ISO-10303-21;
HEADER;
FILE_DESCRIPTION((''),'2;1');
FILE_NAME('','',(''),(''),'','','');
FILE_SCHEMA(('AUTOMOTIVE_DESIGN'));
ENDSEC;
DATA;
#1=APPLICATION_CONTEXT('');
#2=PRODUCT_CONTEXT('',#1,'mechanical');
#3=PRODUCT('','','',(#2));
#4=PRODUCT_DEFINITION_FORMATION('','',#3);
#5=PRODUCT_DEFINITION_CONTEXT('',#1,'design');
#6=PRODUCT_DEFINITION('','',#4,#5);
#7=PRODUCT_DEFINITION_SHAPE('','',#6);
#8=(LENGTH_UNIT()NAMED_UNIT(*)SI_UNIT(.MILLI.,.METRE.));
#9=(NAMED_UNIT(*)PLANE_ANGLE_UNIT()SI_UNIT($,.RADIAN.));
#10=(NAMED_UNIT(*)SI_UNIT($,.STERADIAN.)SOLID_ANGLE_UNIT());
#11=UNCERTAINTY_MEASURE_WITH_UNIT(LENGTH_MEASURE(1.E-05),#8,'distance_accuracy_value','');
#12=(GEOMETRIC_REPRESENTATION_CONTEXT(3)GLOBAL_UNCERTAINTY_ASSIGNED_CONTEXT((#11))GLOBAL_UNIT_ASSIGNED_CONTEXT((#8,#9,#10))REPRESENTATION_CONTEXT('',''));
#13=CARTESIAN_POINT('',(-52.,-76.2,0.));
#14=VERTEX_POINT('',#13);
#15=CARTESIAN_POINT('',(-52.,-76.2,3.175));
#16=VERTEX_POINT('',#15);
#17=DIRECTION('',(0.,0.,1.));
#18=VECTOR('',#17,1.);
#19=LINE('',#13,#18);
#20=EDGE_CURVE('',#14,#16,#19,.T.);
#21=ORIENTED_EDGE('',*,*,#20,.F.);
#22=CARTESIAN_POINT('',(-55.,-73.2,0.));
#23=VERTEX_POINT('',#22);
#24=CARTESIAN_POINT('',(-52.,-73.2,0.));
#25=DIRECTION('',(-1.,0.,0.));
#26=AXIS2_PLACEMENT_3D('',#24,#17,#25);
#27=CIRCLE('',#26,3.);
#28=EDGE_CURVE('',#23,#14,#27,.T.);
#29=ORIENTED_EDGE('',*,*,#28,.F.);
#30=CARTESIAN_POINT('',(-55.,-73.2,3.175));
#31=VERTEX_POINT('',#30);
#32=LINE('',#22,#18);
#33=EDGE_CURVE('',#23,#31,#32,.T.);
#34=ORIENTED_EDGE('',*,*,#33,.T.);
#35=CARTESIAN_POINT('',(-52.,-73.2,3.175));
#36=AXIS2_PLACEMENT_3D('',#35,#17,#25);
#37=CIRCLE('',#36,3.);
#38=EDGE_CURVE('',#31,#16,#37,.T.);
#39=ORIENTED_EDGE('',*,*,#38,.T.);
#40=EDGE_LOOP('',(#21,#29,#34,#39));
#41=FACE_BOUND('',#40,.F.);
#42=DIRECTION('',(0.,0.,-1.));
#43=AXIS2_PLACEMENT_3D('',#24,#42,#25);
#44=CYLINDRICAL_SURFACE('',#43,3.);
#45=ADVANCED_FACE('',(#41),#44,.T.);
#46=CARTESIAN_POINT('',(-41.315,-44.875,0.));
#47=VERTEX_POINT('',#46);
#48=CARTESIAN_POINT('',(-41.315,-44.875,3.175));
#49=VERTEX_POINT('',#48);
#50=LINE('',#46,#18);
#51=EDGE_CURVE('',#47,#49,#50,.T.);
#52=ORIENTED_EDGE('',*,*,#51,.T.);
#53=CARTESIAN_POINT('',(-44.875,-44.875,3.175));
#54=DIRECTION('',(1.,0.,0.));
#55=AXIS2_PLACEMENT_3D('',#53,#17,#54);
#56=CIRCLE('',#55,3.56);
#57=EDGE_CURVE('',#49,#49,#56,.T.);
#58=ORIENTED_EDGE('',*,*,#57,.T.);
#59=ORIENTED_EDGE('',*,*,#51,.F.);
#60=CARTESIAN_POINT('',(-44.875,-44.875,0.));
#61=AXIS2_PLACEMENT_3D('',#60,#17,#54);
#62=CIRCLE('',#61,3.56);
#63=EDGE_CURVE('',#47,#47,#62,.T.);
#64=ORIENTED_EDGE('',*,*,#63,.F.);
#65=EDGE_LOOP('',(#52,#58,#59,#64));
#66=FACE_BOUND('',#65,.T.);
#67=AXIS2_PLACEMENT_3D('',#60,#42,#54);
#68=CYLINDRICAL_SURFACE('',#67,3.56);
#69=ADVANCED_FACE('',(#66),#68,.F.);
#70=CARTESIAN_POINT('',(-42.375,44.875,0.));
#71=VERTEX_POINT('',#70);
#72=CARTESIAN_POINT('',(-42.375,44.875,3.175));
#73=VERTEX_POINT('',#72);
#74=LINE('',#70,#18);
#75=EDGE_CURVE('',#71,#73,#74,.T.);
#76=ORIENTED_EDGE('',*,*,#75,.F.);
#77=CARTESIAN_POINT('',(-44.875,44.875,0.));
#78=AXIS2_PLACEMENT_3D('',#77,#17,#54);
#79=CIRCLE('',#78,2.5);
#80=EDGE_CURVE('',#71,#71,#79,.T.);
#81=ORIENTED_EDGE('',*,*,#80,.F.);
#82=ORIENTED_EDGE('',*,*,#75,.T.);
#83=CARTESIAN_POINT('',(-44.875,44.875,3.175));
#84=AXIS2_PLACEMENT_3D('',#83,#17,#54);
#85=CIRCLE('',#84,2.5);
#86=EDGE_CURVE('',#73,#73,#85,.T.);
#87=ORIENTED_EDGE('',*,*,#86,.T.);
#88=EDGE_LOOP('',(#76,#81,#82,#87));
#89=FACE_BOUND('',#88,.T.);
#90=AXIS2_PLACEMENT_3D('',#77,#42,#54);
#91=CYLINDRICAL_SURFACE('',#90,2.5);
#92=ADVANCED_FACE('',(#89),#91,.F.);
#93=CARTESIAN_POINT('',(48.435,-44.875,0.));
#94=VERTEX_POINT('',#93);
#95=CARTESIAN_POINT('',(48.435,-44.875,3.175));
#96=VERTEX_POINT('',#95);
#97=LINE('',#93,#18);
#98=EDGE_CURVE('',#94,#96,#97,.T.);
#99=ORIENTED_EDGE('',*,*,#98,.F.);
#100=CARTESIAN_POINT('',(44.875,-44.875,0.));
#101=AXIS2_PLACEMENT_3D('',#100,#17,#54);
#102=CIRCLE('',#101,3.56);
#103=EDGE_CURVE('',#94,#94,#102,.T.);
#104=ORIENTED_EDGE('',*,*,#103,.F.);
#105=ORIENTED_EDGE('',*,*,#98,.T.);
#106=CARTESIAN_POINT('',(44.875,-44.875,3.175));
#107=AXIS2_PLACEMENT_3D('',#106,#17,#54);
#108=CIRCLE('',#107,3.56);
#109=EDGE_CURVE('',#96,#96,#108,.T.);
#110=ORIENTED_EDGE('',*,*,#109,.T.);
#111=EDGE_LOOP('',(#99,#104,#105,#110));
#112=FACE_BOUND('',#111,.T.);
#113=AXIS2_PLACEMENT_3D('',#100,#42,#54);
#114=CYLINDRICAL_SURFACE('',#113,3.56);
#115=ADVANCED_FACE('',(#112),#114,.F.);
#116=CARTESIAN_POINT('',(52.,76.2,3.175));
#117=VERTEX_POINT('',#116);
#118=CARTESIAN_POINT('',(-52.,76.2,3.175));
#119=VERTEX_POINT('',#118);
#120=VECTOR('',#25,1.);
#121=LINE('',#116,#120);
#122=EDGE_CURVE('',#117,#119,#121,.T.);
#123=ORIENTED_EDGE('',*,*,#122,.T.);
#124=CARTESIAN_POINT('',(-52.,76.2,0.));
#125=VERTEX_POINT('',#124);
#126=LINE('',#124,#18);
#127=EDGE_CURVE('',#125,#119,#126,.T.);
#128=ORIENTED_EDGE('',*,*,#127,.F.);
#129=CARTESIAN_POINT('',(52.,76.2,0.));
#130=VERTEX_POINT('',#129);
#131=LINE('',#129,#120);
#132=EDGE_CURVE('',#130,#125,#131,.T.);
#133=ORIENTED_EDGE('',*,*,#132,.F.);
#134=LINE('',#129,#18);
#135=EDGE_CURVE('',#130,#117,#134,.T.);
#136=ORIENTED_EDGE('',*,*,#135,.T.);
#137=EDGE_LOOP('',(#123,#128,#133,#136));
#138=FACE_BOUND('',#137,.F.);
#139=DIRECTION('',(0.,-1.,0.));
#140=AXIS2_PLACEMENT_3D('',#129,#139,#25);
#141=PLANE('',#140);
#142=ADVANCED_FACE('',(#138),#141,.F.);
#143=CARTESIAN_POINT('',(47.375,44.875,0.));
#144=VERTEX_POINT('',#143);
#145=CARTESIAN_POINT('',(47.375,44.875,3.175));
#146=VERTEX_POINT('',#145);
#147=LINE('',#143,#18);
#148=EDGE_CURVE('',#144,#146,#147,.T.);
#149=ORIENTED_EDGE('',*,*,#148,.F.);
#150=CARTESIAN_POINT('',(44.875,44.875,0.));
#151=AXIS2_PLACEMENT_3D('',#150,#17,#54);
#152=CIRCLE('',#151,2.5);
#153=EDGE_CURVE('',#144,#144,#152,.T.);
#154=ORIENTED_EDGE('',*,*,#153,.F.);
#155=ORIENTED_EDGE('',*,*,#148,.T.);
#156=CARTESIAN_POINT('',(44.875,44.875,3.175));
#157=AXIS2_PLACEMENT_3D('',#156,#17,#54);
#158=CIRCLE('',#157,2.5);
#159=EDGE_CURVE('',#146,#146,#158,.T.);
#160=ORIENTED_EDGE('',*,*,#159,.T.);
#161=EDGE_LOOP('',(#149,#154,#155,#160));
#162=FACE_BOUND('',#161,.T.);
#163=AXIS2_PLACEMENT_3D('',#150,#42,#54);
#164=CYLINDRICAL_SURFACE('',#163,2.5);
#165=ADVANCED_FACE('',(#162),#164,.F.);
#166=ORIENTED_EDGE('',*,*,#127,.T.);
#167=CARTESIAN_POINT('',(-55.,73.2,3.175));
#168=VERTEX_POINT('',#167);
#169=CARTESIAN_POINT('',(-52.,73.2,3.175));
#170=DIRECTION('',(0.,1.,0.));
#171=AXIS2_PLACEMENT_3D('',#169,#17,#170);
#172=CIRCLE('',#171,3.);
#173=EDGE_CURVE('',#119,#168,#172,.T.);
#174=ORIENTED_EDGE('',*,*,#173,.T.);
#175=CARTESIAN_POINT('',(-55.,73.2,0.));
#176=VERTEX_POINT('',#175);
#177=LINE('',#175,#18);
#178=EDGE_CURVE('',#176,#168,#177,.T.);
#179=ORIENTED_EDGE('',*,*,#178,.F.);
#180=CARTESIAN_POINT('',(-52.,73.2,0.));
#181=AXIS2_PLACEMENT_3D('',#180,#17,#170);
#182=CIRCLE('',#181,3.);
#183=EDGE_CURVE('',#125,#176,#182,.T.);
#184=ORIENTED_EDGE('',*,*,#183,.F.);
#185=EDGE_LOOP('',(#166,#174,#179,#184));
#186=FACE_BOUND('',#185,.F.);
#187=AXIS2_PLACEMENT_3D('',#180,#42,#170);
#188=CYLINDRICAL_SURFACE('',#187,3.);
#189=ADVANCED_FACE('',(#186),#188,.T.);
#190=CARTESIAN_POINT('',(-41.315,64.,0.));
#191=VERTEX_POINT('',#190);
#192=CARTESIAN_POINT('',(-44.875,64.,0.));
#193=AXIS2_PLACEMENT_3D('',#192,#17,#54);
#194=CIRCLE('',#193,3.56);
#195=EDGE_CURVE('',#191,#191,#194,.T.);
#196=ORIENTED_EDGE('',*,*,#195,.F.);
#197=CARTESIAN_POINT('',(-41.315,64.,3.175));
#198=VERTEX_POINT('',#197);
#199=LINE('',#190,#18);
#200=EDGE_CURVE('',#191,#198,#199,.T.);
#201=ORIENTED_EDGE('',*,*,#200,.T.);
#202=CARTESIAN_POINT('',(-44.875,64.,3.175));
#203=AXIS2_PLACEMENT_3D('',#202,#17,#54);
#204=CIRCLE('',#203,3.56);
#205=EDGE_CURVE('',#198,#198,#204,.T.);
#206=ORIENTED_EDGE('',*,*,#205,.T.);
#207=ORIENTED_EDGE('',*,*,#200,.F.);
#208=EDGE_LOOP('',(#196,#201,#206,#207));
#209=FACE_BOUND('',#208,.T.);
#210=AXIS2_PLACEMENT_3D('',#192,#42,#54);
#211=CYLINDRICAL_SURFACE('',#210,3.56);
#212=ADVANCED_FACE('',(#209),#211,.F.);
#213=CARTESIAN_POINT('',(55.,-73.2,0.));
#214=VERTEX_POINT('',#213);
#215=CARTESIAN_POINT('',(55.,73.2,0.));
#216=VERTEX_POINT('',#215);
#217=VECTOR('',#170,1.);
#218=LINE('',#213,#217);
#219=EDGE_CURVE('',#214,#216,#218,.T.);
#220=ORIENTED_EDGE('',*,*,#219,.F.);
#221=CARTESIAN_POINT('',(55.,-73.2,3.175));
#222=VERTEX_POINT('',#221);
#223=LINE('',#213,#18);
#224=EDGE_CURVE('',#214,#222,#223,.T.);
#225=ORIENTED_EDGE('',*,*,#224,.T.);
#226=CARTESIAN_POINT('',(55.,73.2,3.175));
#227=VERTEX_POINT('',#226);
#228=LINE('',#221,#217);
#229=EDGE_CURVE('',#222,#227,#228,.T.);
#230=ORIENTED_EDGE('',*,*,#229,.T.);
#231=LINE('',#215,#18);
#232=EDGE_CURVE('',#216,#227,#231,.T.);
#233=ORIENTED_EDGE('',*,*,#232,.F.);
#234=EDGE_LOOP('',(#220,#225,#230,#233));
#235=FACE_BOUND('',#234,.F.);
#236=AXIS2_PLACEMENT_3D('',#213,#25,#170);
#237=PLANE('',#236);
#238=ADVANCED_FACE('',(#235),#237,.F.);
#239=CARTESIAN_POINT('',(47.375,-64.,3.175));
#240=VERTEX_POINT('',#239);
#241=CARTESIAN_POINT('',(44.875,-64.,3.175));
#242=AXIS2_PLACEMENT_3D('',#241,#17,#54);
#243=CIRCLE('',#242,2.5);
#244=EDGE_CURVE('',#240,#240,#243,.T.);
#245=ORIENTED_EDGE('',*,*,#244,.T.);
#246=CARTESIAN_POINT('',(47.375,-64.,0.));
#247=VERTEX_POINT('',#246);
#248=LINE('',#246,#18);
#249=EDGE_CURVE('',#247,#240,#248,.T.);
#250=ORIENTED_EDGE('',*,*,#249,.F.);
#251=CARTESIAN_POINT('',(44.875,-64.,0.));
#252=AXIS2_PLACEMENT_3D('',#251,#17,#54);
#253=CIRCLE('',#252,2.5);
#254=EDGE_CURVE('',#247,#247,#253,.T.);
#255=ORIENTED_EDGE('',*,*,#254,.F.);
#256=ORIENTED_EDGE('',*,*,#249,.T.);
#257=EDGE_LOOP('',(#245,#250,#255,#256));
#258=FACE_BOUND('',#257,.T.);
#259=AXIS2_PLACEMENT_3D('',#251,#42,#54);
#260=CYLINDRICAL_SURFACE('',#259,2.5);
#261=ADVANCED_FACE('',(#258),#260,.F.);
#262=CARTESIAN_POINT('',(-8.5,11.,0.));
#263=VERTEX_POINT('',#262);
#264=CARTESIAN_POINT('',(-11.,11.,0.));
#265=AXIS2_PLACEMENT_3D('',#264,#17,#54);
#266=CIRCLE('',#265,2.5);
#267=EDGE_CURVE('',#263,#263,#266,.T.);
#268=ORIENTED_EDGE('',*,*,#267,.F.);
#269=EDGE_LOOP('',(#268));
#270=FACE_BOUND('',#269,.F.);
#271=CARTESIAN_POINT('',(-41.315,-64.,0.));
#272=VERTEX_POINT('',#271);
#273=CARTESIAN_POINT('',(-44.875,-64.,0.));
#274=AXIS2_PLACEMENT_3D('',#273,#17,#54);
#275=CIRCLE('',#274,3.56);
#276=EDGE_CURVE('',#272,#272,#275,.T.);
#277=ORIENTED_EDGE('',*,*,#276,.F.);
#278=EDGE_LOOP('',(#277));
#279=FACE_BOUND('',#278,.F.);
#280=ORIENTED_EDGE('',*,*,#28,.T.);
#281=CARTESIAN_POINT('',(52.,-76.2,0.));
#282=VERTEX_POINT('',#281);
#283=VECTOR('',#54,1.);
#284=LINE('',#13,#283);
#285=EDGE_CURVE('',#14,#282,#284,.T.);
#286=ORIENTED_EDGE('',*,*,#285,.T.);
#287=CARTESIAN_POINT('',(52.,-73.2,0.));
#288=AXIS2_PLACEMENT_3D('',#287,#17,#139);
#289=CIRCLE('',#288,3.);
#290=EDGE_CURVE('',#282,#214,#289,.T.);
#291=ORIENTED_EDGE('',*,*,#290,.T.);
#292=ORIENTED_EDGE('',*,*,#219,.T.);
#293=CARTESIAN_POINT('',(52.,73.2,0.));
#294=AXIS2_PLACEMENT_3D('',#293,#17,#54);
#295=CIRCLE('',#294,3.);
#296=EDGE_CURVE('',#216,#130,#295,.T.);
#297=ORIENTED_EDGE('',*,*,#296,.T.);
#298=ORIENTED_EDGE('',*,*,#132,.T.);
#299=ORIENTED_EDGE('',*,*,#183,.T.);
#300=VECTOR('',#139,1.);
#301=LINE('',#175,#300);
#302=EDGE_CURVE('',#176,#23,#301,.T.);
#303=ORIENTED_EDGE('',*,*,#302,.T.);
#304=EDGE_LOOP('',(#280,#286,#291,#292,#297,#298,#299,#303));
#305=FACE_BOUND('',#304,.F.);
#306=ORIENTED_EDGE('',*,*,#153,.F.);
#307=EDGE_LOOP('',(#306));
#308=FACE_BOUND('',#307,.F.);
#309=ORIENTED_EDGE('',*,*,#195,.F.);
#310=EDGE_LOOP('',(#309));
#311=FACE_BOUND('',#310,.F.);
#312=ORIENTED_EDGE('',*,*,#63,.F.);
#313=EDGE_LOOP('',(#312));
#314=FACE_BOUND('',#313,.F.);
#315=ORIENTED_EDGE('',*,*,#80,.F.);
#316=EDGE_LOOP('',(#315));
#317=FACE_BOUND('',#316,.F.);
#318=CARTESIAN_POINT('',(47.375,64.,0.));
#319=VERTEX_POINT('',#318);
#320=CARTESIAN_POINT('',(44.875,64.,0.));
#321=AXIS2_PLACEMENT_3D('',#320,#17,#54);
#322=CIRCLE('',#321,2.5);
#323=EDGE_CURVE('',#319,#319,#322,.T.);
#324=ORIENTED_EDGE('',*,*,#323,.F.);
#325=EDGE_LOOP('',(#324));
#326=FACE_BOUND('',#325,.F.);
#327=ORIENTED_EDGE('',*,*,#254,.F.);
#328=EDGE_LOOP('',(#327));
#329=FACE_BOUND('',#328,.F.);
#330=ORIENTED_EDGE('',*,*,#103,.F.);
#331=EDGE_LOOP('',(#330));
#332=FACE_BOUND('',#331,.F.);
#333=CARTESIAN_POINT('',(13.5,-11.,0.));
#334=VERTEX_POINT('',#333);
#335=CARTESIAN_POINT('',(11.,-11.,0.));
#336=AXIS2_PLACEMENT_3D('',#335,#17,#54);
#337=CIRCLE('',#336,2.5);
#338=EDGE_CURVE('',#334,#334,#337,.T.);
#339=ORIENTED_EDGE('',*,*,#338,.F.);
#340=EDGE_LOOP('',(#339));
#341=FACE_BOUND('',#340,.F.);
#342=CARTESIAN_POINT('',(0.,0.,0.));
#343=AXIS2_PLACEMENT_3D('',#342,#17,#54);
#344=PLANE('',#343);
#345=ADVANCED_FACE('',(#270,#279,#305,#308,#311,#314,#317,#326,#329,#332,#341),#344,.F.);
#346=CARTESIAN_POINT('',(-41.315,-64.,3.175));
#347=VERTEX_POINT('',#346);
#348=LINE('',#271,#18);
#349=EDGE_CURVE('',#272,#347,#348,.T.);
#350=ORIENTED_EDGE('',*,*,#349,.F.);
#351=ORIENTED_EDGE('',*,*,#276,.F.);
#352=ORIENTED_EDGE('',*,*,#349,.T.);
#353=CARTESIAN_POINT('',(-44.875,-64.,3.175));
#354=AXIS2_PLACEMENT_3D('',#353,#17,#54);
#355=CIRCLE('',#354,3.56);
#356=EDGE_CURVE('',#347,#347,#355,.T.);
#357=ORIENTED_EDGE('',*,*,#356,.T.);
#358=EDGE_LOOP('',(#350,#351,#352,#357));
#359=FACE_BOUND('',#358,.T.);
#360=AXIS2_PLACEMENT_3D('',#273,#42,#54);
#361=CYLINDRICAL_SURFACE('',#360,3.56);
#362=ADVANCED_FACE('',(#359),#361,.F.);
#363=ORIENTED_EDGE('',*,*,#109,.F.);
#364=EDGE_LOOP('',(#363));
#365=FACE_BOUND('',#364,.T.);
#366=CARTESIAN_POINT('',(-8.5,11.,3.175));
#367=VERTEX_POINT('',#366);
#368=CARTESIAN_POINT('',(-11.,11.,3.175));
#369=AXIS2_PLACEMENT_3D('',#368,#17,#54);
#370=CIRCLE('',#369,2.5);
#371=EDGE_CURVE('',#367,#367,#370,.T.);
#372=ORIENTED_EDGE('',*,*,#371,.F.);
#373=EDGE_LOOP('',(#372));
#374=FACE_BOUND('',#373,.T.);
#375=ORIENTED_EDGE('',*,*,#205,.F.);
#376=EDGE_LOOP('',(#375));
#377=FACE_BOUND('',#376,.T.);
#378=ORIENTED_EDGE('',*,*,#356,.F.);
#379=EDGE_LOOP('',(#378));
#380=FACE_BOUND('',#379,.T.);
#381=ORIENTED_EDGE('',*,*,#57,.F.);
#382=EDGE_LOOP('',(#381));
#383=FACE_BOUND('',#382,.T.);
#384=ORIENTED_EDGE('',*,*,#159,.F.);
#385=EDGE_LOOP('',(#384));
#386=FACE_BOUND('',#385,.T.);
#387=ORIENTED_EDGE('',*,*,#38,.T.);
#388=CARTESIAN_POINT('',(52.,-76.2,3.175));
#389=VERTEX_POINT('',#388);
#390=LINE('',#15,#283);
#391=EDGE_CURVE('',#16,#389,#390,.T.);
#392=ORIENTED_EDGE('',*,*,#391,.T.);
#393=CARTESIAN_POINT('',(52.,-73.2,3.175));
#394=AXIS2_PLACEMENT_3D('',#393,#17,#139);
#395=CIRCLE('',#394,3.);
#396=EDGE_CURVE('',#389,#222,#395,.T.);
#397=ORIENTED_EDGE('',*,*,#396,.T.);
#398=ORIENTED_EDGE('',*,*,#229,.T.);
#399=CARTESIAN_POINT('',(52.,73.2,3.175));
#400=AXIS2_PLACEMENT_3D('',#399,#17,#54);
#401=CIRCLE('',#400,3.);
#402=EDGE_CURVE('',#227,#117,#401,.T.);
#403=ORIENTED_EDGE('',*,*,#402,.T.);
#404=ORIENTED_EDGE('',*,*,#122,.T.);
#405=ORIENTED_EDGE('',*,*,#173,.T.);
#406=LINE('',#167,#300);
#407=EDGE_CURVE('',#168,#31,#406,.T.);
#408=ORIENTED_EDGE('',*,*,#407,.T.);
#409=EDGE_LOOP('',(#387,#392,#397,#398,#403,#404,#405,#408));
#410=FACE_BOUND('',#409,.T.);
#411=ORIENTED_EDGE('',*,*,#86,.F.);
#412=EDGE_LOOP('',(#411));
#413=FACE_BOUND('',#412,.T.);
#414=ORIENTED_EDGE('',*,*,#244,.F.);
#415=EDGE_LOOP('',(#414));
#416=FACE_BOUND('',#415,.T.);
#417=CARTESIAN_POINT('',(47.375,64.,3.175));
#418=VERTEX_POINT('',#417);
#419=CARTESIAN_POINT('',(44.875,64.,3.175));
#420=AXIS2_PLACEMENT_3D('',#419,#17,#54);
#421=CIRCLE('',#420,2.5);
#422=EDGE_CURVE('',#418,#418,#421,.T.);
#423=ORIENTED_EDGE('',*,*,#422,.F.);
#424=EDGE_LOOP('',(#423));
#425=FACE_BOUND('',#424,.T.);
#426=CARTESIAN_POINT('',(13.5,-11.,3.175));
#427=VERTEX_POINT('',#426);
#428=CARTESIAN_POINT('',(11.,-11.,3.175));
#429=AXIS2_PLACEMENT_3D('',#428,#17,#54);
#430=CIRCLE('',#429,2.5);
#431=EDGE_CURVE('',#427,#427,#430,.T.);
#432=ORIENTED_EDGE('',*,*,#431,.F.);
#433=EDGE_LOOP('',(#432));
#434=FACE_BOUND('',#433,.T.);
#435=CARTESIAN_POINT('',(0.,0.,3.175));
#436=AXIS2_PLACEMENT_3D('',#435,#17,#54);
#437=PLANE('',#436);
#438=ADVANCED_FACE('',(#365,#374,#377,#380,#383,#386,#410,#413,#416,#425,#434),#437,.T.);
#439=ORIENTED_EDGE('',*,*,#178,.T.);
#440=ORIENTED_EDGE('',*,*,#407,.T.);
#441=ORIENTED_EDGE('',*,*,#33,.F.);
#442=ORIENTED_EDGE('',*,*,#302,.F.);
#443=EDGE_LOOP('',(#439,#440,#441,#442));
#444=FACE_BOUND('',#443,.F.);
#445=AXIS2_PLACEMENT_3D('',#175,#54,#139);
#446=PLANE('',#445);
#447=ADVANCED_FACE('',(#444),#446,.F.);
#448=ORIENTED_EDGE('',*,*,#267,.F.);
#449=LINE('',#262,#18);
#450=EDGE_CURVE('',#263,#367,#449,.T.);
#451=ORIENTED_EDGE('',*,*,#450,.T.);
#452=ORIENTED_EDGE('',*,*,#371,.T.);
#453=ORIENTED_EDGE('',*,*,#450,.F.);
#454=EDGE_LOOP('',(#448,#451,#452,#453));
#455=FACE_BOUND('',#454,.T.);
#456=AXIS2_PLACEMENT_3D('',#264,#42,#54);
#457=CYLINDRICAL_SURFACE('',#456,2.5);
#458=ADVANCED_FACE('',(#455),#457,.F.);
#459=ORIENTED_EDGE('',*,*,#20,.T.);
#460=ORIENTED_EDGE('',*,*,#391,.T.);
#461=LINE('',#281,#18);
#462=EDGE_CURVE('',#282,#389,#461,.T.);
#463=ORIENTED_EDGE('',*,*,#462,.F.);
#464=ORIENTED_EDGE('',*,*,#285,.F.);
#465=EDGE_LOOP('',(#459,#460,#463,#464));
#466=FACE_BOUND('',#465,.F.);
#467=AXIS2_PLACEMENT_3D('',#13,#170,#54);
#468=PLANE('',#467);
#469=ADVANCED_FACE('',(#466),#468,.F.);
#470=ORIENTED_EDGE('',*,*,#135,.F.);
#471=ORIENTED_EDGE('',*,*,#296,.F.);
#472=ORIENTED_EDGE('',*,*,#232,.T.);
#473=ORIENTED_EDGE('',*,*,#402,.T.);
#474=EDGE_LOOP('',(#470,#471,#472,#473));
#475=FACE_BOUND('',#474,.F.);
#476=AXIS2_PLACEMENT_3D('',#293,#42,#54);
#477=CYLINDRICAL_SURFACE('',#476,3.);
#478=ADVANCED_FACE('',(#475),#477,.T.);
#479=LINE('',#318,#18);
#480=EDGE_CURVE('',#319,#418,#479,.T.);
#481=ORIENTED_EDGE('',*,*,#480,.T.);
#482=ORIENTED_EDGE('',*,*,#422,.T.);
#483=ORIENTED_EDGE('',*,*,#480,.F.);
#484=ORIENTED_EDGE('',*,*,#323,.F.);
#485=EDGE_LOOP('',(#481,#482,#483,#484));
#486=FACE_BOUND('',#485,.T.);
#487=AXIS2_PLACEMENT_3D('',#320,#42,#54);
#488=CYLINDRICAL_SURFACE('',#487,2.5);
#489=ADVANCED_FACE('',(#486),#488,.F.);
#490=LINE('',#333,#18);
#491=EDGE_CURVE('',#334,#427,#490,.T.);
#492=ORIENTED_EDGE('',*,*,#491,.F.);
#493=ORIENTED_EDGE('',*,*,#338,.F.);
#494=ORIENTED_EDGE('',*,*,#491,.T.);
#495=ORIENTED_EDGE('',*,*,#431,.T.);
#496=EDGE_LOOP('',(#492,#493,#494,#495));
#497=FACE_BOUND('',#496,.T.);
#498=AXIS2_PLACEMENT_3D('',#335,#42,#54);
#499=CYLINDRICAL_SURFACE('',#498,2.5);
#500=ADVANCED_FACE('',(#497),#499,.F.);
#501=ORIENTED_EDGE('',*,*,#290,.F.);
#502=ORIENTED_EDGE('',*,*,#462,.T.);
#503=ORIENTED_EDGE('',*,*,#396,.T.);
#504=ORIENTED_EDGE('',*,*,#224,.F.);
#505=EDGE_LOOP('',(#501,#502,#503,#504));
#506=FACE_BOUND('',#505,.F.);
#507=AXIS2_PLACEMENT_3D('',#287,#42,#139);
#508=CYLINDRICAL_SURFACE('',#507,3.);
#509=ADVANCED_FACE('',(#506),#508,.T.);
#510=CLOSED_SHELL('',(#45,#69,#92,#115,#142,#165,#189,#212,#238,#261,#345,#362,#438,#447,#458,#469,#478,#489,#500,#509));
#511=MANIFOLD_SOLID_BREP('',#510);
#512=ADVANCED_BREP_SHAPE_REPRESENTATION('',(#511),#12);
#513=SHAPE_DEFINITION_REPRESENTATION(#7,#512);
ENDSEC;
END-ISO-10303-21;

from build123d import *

# Parameters (mm, degrees)
F0_R     = 3.56
F0_R_2   = 2.5
F1_DEPTH = 3.175


# Not quite as in the source:
# - a length typed as a fraction of an inch, garbled in the dataset ("3 / 203.2 mm" for 3/8 in), is restored


with BuildPart() as f1:
    # F0 (on Top) → F1 (new body)
    with BuildSketch(Plane.XY):
        with BuildLine():
            ThreePointArc((55, 73.2), (54.1213203436, 75.3213203436), (52, 76.2))
            Line((52, 76.2), (-52, 76.2))
            ThreePointArc((-52, 76.2), (-54.1213203436, 75.3213203436), (-55, 73.2))
            Line((-55, 73.2), (-55, -73.2))
            ThreePointArc((-55, -73.2), (-54.1213203436, -75.3213203436), (-52, -76.2))
            Line((-52, -76.2), (52, -76.2))
            ThreePointArc((52, -76.2), (54.1213203436, -75.3213203436), (55, -73.2))
            Line((55, -73.2), (55, 73.2))
        make_face()
        with Locations((-44.875, -64)):
            Circle(F0_R, mode=Mode.SUBTRACT)
        with Locations((-44.875, -44.875)):
            Circle(F0_R, mode=Mode.SUBTRACT)
        with Locations((44.875, -64)):
            Circle(F0_R_2, mode=Mode.SUBTRACT)
        with Locations((44.875, -44.875)):
            Circle(F0_R, mode=Mode.SUBTRACT)
        with Locations((11, -11)):
            Circle(F0_R_2, mode=Mode.SUBTRACT)
        with Locations((-11, 11)):
            Circle(F0_R_2, mode=Mode.SUBTRACT)
        with Locations((-44.875, 44.875)):
            Circle(F0_R_2, mode=Mode.SUBTRACT)
        with Locations((-44.875, 64)):
            Circle(F0_R, mode=Mode.SUBTRACT)
        with Locations((44.875, 44.875)):
            Circle(F0_R_2, mode=Mode.SUBTRACT)
        with Locations((44.875, 64)):
            Circle(F0_R_2, mode=Mode.SUBTRACT)
    extrude(amount=F1_DEPTH)


solid = f1.part
